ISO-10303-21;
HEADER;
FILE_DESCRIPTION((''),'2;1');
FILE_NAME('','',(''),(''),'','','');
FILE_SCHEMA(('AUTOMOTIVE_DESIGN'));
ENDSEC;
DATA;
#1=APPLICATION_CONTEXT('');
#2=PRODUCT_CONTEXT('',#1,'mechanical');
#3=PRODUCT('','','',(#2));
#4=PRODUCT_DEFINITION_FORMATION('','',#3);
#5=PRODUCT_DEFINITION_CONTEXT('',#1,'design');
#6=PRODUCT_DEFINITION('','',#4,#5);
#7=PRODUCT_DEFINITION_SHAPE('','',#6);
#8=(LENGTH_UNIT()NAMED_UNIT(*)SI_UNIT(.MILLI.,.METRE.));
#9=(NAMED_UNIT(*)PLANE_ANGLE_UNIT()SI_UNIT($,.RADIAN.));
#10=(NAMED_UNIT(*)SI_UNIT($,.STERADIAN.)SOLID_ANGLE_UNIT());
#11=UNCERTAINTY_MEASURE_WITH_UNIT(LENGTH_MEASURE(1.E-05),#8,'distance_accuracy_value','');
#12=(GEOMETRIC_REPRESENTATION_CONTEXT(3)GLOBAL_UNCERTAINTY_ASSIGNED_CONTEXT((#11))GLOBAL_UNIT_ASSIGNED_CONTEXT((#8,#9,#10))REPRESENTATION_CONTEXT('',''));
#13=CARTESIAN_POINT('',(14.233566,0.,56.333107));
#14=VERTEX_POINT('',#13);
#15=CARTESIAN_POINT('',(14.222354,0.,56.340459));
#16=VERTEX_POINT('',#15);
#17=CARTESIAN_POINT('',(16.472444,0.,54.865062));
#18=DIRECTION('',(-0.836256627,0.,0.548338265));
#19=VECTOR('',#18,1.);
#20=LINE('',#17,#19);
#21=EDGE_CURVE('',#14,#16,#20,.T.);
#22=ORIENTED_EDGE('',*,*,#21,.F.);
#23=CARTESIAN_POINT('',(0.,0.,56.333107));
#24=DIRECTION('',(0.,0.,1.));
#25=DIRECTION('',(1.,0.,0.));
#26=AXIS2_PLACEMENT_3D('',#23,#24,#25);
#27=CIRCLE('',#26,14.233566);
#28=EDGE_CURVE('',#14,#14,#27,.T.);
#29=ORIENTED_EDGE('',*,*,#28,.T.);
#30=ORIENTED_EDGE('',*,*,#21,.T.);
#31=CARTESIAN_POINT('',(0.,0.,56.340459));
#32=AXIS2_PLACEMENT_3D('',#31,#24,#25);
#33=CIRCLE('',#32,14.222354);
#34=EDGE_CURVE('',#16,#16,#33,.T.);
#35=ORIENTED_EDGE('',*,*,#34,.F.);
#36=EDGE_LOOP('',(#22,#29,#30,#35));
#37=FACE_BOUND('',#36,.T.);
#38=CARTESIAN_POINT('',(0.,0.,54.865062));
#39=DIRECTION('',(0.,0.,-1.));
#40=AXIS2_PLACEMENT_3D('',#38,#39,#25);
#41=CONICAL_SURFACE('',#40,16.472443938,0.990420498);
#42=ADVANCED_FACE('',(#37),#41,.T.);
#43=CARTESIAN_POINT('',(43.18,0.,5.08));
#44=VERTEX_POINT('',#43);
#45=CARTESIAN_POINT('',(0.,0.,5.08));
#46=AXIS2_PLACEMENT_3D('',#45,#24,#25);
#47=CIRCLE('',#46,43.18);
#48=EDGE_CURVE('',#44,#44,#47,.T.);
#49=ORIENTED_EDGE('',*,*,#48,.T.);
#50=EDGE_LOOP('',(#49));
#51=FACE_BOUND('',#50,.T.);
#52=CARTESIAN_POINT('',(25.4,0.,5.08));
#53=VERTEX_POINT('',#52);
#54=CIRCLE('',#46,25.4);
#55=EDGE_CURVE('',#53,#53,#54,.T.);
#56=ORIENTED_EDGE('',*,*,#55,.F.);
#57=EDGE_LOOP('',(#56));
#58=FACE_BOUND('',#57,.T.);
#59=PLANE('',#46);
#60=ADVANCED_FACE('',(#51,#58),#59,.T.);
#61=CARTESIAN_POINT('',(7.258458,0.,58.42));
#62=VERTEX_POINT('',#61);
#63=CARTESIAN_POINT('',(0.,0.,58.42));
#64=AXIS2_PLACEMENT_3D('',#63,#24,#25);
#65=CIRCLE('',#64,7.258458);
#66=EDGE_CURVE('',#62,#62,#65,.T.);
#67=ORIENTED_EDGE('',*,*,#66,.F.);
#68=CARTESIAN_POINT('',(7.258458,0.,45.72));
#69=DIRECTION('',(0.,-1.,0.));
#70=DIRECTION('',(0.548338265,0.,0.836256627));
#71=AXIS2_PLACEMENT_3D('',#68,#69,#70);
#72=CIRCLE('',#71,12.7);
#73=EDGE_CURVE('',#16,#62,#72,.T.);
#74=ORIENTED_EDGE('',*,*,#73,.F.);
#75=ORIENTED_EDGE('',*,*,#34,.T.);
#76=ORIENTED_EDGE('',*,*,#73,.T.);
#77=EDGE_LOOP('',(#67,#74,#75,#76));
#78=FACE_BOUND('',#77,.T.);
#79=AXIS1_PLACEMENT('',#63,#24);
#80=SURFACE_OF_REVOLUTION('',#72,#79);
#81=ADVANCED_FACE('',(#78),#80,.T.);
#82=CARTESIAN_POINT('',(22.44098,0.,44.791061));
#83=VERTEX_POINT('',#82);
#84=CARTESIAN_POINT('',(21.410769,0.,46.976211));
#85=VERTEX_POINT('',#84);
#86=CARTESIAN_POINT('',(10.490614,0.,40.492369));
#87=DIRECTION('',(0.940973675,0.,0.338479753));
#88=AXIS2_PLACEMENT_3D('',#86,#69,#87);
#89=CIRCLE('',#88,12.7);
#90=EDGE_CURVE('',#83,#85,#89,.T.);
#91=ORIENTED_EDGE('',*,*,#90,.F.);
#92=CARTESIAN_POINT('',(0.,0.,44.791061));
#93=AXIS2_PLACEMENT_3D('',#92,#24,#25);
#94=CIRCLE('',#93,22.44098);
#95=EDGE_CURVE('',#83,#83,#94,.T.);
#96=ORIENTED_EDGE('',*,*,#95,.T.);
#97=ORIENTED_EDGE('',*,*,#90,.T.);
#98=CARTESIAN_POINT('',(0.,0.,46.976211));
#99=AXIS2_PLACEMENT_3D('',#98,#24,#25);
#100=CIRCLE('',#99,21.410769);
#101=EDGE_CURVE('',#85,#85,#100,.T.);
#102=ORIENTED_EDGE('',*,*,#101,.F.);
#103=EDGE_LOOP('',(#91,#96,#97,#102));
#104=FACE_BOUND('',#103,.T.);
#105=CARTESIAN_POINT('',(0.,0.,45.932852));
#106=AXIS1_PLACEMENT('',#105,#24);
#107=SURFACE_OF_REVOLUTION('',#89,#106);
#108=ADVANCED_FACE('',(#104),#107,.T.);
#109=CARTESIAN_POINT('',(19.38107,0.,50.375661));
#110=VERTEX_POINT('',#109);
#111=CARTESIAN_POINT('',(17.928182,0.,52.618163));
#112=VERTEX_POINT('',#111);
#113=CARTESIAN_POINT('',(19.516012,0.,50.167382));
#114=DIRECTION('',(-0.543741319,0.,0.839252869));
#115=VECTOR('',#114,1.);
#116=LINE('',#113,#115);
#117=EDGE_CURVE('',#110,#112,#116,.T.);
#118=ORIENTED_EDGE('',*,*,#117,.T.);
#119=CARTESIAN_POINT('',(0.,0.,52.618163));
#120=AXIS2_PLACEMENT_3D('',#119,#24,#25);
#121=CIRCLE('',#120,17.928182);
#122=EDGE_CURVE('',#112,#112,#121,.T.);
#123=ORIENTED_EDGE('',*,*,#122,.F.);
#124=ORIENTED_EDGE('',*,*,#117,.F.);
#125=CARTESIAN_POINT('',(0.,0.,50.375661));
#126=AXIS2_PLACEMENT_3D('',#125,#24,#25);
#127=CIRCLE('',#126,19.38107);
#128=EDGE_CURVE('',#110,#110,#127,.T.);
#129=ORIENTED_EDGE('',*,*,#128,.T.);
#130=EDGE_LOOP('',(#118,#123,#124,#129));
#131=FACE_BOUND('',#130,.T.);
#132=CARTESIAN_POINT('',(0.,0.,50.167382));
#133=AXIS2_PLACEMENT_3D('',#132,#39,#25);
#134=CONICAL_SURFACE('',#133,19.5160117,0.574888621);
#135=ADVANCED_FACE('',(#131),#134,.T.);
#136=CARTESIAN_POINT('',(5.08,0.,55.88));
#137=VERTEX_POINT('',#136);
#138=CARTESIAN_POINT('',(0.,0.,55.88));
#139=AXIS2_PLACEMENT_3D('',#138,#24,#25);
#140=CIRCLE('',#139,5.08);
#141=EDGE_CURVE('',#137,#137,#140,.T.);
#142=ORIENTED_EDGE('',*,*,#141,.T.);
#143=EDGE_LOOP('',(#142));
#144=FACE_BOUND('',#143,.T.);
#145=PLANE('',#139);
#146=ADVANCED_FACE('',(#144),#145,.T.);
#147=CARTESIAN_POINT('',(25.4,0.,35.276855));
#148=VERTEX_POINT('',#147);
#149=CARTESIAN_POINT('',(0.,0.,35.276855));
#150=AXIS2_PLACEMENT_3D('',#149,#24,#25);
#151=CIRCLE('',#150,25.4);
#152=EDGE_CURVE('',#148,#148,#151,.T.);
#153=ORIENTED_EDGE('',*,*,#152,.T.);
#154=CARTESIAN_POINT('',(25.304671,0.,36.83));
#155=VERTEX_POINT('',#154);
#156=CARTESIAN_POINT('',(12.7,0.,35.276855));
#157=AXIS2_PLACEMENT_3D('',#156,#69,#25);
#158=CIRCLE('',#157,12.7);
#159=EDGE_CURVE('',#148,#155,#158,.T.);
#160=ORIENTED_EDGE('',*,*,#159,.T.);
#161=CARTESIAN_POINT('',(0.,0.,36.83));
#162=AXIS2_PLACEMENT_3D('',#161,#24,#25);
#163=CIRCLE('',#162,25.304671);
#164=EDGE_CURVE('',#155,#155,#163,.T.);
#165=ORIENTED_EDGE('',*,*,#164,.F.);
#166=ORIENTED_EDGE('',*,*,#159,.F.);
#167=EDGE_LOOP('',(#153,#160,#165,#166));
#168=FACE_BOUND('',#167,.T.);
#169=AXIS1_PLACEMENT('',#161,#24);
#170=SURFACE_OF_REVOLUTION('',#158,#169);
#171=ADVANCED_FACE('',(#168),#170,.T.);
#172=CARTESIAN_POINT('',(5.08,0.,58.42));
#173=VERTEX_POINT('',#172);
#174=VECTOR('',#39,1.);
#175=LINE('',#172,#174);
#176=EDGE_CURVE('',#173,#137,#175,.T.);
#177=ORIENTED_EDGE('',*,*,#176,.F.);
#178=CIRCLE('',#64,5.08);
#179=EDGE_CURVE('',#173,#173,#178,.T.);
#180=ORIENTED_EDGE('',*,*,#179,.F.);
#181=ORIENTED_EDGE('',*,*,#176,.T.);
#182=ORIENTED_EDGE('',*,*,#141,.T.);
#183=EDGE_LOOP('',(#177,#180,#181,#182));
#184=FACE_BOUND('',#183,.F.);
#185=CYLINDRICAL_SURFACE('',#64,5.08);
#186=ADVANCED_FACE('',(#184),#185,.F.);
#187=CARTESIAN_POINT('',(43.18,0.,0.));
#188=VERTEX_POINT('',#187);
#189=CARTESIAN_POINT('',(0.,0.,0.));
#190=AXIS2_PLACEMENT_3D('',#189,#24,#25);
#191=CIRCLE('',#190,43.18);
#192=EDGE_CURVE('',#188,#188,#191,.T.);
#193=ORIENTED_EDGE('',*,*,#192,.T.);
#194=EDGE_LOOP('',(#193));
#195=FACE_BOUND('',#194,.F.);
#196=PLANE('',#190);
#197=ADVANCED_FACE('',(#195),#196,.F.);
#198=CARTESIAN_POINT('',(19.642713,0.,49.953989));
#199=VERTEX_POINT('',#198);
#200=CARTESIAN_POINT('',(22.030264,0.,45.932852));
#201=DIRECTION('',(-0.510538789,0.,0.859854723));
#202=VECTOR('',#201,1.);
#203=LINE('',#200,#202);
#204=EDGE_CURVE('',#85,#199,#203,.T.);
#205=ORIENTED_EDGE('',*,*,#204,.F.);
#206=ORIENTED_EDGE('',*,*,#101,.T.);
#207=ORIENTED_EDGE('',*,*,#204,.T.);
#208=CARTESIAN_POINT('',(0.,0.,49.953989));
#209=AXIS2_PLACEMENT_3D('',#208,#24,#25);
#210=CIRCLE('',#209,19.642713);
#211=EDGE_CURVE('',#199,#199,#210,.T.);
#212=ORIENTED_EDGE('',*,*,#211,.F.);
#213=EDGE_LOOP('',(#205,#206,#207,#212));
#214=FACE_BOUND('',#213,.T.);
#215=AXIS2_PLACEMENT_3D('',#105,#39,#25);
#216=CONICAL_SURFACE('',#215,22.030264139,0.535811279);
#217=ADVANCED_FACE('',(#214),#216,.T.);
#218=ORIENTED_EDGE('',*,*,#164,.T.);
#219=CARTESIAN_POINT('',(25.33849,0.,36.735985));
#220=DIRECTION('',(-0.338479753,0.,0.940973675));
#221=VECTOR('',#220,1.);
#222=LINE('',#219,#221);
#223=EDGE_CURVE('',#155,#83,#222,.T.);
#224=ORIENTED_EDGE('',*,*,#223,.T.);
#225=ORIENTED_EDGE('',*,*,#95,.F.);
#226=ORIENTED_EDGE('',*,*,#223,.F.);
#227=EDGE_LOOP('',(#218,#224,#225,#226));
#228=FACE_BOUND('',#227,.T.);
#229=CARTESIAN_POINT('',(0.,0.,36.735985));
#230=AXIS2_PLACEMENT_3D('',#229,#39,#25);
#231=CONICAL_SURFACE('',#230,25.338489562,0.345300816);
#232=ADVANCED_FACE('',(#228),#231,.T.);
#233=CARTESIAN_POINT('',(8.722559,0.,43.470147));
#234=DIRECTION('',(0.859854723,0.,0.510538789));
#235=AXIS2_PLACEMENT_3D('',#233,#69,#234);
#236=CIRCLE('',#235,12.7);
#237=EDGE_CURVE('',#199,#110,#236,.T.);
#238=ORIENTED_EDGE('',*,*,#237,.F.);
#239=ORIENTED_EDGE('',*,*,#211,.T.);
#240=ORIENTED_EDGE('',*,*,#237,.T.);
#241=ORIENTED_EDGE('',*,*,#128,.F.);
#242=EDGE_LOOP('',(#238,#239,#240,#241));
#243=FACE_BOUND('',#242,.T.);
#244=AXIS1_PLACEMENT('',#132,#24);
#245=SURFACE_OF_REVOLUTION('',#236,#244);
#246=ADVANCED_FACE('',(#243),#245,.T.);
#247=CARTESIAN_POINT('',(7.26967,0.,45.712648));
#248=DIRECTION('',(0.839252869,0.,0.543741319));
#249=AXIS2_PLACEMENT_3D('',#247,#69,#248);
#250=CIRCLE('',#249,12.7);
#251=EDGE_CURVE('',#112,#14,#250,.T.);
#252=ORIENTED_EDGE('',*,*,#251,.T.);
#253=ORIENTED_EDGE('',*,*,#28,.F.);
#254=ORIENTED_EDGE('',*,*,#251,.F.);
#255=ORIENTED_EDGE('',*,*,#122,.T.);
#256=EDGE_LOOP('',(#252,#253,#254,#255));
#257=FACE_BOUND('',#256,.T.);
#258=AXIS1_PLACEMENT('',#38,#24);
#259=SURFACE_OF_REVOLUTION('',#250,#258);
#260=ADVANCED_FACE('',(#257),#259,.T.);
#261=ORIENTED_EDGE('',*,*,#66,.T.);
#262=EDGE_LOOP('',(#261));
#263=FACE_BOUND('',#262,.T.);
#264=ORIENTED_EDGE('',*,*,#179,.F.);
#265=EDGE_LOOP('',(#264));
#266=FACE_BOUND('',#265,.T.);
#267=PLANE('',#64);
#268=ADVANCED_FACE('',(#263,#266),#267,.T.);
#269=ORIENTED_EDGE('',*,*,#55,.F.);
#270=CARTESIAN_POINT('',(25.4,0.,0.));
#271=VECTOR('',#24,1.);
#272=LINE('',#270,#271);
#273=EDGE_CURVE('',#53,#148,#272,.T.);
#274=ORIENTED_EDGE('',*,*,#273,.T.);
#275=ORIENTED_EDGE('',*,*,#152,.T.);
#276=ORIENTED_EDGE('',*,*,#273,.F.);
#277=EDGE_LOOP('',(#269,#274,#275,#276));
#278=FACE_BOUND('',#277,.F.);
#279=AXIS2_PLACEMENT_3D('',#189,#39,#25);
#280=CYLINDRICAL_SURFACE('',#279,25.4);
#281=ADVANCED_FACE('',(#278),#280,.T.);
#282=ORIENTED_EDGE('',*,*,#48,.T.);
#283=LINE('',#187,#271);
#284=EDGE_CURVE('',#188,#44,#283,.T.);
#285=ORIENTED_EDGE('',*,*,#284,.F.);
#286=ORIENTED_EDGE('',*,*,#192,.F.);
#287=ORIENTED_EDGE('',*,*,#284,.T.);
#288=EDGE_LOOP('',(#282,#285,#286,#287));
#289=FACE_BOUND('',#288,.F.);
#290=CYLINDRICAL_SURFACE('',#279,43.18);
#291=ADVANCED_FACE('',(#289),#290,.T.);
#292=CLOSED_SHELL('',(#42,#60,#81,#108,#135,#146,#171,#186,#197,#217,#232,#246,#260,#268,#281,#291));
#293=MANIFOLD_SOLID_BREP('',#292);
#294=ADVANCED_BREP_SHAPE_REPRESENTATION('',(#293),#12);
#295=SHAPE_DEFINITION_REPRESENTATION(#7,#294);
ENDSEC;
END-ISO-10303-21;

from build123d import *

# Parameters (mm, degrees)
F0_R     = 43.18
F0_R_2   = 25.4
F1_DEPTH = 5.08
F2_DEPTH = 36.83
F6_R     = 5.08
F7_DEPTH = 2.54


# Not quite as in the source:
# - a fillet or chamfer that OpenCascade refuses, or shapes differently, is made with other operations: its cross-section is extruded or revolved along the edge and cut away or added


with BuildPart() as f1:
    # F0 (on Top) → F1 (new body)
    with BuildSketch(Plane.XY):
        Circle(F0_R)
        Circle(F0_R_2, mode=Mode.SUBTRACT)
    extrude(amount=F1_DEPTH)

    # F0 (on Top) → F2 (join)
    with BuildSketch(Plane.XY):
        Circle(F0_R_2)
    extrude(amount=F2_DEPTH)

    # F3 (on Front) → F4 (revolve)
    with BuildSketch(Plane.XZ):
        Polygon((0, 58.42), (0, 36.8297025561), (25.3384895623, 36.7359854281), (22.0302641392, 45.9328517318), (19.5160117, 50.1673817635), (16.4724439383, 54.8650622368), (11.0508995131, 58.42), align=None)
    revolve(axis=Axis((0, 0, 47.6248512781), (0, 0, 1)))

    # F5: fillet of radius 12.7 on 5 edges, made by hand

    # F5_s1 → F5_t2 (revolve, cut)
    with BuildSketch(Plane.XZ):
        with BuildLine():
            ThreePointArc((25.4, 35.2768549118), (25.3761454392, 36.0548888463), (25.3046713696, 36.83))
            Line((25.3046713696, 36.83), (25.4, 36.83))
            Line((25.4, 36.83), (25.4, 35.2768549118))
        make_face()
    revolve(axis=Axis((0, 0, 36.83), (0, 0, 1)), mode=Mode.SUBTRACT)

    # F5_s3 → F5_t4 (revolve, cut)
    with BuildSketch(Plane.XZ):
        with BuildLine():
            ThreePointArc((19.6427134925, 49.9539892906), (19.513951513, 50.166103437), (19.3810699459, 50.3756614184))
            Line((19.3810699459, 50.3756614184), (19.5160117, 50.1673817635))
            Line((19.5160117, 50.1673817635), (19.6427134925, 49.9539892906))
        make_face()
    revolve(axis=Axis((0, 0, 50.1673817635), (0, 0, 1)), mode=Mode.SUBTRACT)

    # F5_s5 → F5_t6 (revolve, cut)
    with BuildSketch(Plane.XZ):
        with BuildLine():
            ThreePointArc((22.4409800917, 44.79106143), (21.9779508662, 45.9081881165), (21.4107694035, 46.9762111901))
            Line((21.4107694035, 46.9762111901), (22.0302641392, 45.9328517318))
            Line((22.0302641392, 45.9328517318), (22.4409800917, 44.79106143))
        make_face()
    revolve(axis=Axis((0, 0, 45.9328517318), (0, 0, 1)), mode=Mode.SUBTRACT)

    # F5_s7 → F5_t8 (revolve, cut)
    with BuildSketch(Plane.XZ):
        with BuildLine():
            ThreePointArc((17.9281816755, 52.6181627827), (16.274530798, 54.6682321185), (14.2335662066, 56.3331072017))
            Line((14.2335662066, 56.3331072017), (16.4724439383, 54.8650622368))
            Line((16.4724439383, 54.8650622368), (17.9281816755, 52.6181627827))
        make_face()
    revolve(axis=Axis((0, 0, 54.8650622368), (0, 0, 1)), mode=Mode.SUBTRACT)

    # F5_s9 → F5_t10 (revolve, cut)
    with BuildSketch(Plane.XZ):
        with BuildLine():
            ThreePointArc((14.2223539104, 56.3404591686), (10.8923380013, 57.8890145748), (7.2584579428, 58.42))
            Line((7.2584579428, 58.42), (11.0508995131, 58.42))
            Line((11.0508995131, 58.42), (14.2223539104, 56.3404591686))
        make_face()
    revolve(axis=Axis((0, 0, 58.42), (0, 0, 1)), mode=Mode.SUBTRACT)

    # F6 (on face) → F7 (cut)
    with BuildSketch(Plane.XY.offset(58.42)):
        Circle(F6_R)
    extrude(amount=-F7_DEPTH, mode=Mode.SUBTRACT)


solid = f1.part
